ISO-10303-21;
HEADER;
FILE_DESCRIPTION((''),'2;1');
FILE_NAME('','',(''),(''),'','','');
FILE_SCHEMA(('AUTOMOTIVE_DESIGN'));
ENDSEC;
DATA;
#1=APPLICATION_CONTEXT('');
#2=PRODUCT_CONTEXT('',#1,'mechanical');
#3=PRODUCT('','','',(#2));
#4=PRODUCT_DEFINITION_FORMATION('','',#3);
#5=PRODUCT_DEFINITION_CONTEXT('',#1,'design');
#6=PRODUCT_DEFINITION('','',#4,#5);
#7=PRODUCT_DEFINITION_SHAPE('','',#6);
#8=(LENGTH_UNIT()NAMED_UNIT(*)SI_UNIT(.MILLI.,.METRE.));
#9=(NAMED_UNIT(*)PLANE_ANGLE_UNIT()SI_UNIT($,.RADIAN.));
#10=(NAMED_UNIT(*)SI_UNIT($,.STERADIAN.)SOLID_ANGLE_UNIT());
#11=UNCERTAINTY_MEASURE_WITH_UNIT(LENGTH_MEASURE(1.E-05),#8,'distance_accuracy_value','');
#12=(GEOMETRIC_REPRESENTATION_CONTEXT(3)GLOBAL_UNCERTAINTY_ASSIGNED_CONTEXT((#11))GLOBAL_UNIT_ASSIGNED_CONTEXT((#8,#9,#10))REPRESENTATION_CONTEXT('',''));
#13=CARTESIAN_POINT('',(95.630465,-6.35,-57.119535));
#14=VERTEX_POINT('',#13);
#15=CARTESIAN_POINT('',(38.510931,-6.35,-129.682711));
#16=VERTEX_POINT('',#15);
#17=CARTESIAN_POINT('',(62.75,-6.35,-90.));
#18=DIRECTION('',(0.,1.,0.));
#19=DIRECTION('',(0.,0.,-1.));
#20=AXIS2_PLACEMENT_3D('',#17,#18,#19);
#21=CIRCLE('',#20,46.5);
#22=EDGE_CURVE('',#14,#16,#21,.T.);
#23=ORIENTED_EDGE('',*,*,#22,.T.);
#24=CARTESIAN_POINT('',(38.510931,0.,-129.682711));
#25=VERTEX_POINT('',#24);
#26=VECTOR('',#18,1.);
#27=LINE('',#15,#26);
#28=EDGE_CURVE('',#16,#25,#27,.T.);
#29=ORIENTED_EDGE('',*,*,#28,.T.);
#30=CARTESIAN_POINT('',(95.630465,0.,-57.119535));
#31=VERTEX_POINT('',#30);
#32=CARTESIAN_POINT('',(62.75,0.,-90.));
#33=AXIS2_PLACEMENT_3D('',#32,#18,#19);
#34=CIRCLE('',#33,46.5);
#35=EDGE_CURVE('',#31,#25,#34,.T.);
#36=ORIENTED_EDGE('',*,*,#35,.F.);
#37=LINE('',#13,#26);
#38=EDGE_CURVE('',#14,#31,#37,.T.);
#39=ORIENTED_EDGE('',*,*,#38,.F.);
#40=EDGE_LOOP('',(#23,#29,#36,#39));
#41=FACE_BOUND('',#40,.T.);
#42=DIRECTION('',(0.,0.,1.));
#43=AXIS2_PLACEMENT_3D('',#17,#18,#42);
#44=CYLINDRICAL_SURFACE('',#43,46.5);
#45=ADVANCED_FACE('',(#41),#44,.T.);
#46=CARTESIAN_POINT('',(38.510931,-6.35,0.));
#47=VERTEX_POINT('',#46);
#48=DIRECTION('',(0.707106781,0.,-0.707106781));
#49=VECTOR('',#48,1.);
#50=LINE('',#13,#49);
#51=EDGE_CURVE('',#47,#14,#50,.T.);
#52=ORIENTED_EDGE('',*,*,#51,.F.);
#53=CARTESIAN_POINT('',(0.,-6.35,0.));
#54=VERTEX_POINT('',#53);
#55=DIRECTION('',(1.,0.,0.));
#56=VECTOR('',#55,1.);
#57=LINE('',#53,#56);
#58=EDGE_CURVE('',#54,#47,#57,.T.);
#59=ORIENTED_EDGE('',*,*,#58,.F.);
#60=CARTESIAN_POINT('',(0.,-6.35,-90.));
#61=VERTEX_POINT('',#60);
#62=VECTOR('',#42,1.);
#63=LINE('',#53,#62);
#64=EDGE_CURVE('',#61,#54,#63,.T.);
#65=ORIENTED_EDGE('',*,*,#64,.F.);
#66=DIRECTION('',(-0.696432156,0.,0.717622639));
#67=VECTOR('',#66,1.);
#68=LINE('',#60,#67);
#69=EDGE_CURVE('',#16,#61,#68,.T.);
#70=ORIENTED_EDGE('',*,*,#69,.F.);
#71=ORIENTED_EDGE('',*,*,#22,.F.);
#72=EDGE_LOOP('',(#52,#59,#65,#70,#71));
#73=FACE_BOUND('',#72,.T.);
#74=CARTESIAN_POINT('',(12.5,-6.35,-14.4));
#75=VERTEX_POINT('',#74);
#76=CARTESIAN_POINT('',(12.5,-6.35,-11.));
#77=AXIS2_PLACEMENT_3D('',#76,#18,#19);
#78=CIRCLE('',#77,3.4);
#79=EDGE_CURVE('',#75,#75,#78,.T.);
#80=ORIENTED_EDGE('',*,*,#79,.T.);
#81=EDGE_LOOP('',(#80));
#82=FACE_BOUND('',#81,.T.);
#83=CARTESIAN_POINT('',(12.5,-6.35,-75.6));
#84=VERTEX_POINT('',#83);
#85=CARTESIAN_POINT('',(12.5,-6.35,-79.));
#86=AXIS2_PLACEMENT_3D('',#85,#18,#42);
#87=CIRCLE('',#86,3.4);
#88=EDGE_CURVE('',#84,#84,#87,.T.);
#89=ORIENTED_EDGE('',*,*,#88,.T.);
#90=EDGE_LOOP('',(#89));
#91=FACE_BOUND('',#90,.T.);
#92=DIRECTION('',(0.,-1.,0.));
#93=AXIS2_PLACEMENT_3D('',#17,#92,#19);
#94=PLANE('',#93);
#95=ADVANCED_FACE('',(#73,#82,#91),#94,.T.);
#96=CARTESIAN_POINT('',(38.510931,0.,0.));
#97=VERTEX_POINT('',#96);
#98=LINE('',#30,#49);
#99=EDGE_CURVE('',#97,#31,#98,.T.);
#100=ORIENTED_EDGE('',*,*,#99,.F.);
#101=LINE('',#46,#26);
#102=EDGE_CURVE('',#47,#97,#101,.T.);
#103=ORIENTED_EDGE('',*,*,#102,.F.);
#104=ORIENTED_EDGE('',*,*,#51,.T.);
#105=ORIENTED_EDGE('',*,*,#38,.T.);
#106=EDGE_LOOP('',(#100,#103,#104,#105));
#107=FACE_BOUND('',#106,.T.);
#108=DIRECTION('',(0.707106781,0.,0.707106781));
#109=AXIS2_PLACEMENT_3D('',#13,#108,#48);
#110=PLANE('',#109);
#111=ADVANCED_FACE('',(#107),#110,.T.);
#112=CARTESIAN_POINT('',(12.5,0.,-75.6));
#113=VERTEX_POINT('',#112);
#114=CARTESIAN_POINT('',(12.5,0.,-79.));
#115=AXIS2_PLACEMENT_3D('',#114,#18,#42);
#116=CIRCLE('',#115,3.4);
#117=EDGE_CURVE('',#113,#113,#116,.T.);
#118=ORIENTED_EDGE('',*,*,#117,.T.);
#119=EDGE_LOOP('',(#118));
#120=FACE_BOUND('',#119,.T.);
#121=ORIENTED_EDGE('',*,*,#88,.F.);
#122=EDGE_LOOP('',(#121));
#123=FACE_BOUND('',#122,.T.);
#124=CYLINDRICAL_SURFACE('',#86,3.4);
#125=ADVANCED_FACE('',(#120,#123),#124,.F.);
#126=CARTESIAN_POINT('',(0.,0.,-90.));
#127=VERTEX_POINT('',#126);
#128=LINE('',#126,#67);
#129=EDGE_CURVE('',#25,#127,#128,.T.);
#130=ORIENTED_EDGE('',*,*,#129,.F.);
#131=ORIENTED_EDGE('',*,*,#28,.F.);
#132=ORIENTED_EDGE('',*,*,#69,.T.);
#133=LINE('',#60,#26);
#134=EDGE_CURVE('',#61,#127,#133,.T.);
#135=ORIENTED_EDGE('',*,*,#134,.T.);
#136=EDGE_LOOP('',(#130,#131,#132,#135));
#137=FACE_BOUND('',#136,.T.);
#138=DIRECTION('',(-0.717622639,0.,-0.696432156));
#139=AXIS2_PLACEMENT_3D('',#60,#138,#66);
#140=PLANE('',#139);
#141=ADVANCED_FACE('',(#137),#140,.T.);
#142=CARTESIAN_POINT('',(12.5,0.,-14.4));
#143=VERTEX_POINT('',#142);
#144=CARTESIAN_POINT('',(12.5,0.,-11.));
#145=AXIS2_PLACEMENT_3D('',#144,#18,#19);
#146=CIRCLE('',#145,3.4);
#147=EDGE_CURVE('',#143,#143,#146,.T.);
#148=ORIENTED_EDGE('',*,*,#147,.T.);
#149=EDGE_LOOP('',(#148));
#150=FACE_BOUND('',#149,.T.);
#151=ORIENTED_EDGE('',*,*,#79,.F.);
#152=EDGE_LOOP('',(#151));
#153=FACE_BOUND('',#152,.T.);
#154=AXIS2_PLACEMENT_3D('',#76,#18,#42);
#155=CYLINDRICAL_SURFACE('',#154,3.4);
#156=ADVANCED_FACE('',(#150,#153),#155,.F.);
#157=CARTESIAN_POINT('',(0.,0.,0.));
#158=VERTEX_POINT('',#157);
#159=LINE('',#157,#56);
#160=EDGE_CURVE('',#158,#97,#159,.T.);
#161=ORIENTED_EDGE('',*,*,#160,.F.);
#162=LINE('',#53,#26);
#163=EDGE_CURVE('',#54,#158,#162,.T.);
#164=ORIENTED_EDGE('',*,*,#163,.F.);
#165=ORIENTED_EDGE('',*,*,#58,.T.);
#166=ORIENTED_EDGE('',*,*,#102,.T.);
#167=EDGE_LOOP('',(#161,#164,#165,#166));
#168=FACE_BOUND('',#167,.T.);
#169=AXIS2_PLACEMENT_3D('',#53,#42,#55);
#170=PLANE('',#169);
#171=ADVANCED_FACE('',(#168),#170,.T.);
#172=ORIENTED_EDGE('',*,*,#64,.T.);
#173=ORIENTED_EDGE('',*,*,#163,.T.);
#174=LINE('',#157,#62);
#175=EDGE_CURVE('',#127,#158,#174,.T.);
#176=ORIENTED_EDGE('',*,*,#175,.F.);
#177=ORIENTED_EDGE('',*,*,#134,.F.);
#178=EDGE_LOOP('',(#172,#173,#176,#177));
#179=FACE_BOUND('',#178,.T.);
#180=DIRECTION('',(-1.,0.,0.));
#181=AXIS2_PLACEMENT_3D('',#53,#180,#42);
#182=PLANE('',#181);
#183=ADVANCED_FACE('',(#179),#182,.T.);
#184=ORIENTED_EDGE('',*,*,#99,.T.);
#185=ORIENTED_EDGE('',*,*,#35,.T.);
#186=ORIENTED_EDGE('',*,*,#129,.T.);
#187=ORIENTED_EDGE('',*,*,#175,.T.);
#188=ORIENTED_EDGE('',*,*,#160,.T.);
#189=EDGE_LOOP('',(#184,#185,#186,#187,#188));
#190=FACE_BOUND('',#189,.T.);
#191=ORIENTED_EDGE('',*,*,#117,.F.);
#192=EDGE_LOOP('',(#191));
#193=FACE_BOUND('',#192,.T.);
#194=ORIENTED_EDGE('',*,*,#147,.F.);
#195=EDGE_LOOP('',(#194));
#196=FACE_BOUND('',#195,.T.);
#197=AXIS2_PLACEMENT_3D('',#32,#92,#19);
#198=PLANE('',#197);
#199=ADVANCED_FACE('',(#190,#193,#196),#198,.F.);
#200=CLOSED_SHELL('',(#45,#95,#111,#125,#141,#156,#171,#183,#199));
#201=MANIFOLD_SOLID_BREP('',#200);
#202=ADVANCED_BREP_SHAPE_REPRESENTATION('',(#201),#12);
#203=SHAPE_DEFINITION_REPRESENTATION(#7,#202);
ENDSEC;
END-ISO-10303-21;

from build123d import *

# Parameters (mm, degrees)
BASE_FLANGE1_DEPTH = 6.35
SKETCH8_R          = 3.4
CUT_EXTRUDE1_DEPTH = 175.95180765


# Sheet-metal steps are written as plain solids
with BuildPart() as part:
    # Sketch2 → Base-Flange1 (new body)
    with BuildSketch(Plane(origin=(0, 0, 0), x_dir=(1, 0, 0), z_dir=(0, 1, 0))):
        with BuildLine():
            Line((0, 0), (38.51093065, 0))
            Line((38.51093065, 0), (95.630465325, 57.119534675))
            ThreePointArc((95.630465325, 57.119534675), (99.287953618, 118.761570635), (38.51093065, 129.682710556))
            Line((38.51093065, 129.682710556), (0, 90))
            Line((0, 90), (0, 0))
        make_face()
    extrude(amount=-BASE_FLANGE1_DEPTH)

    # Sketch8 → Cut-Extrude1 (cut, through all)
    with BuildSketch(Plane(origin=(0, 0, 0), x_dir=(1, 0, 0), z_dir=(0, 1, 0))):
        with Locations(Location((12.5, 79, 0), (0, 0, 270))):
            Circle(SKETCH8_R)
        with Locations(Location((12.5, 11, 0), (0, 0, 90))):
            Circle(SKETCH8_R)
    extrude(amount=-CUT_EXTRUDE1_DEPTH, mode=Mode.SUBTRACT)


solid = part.part
